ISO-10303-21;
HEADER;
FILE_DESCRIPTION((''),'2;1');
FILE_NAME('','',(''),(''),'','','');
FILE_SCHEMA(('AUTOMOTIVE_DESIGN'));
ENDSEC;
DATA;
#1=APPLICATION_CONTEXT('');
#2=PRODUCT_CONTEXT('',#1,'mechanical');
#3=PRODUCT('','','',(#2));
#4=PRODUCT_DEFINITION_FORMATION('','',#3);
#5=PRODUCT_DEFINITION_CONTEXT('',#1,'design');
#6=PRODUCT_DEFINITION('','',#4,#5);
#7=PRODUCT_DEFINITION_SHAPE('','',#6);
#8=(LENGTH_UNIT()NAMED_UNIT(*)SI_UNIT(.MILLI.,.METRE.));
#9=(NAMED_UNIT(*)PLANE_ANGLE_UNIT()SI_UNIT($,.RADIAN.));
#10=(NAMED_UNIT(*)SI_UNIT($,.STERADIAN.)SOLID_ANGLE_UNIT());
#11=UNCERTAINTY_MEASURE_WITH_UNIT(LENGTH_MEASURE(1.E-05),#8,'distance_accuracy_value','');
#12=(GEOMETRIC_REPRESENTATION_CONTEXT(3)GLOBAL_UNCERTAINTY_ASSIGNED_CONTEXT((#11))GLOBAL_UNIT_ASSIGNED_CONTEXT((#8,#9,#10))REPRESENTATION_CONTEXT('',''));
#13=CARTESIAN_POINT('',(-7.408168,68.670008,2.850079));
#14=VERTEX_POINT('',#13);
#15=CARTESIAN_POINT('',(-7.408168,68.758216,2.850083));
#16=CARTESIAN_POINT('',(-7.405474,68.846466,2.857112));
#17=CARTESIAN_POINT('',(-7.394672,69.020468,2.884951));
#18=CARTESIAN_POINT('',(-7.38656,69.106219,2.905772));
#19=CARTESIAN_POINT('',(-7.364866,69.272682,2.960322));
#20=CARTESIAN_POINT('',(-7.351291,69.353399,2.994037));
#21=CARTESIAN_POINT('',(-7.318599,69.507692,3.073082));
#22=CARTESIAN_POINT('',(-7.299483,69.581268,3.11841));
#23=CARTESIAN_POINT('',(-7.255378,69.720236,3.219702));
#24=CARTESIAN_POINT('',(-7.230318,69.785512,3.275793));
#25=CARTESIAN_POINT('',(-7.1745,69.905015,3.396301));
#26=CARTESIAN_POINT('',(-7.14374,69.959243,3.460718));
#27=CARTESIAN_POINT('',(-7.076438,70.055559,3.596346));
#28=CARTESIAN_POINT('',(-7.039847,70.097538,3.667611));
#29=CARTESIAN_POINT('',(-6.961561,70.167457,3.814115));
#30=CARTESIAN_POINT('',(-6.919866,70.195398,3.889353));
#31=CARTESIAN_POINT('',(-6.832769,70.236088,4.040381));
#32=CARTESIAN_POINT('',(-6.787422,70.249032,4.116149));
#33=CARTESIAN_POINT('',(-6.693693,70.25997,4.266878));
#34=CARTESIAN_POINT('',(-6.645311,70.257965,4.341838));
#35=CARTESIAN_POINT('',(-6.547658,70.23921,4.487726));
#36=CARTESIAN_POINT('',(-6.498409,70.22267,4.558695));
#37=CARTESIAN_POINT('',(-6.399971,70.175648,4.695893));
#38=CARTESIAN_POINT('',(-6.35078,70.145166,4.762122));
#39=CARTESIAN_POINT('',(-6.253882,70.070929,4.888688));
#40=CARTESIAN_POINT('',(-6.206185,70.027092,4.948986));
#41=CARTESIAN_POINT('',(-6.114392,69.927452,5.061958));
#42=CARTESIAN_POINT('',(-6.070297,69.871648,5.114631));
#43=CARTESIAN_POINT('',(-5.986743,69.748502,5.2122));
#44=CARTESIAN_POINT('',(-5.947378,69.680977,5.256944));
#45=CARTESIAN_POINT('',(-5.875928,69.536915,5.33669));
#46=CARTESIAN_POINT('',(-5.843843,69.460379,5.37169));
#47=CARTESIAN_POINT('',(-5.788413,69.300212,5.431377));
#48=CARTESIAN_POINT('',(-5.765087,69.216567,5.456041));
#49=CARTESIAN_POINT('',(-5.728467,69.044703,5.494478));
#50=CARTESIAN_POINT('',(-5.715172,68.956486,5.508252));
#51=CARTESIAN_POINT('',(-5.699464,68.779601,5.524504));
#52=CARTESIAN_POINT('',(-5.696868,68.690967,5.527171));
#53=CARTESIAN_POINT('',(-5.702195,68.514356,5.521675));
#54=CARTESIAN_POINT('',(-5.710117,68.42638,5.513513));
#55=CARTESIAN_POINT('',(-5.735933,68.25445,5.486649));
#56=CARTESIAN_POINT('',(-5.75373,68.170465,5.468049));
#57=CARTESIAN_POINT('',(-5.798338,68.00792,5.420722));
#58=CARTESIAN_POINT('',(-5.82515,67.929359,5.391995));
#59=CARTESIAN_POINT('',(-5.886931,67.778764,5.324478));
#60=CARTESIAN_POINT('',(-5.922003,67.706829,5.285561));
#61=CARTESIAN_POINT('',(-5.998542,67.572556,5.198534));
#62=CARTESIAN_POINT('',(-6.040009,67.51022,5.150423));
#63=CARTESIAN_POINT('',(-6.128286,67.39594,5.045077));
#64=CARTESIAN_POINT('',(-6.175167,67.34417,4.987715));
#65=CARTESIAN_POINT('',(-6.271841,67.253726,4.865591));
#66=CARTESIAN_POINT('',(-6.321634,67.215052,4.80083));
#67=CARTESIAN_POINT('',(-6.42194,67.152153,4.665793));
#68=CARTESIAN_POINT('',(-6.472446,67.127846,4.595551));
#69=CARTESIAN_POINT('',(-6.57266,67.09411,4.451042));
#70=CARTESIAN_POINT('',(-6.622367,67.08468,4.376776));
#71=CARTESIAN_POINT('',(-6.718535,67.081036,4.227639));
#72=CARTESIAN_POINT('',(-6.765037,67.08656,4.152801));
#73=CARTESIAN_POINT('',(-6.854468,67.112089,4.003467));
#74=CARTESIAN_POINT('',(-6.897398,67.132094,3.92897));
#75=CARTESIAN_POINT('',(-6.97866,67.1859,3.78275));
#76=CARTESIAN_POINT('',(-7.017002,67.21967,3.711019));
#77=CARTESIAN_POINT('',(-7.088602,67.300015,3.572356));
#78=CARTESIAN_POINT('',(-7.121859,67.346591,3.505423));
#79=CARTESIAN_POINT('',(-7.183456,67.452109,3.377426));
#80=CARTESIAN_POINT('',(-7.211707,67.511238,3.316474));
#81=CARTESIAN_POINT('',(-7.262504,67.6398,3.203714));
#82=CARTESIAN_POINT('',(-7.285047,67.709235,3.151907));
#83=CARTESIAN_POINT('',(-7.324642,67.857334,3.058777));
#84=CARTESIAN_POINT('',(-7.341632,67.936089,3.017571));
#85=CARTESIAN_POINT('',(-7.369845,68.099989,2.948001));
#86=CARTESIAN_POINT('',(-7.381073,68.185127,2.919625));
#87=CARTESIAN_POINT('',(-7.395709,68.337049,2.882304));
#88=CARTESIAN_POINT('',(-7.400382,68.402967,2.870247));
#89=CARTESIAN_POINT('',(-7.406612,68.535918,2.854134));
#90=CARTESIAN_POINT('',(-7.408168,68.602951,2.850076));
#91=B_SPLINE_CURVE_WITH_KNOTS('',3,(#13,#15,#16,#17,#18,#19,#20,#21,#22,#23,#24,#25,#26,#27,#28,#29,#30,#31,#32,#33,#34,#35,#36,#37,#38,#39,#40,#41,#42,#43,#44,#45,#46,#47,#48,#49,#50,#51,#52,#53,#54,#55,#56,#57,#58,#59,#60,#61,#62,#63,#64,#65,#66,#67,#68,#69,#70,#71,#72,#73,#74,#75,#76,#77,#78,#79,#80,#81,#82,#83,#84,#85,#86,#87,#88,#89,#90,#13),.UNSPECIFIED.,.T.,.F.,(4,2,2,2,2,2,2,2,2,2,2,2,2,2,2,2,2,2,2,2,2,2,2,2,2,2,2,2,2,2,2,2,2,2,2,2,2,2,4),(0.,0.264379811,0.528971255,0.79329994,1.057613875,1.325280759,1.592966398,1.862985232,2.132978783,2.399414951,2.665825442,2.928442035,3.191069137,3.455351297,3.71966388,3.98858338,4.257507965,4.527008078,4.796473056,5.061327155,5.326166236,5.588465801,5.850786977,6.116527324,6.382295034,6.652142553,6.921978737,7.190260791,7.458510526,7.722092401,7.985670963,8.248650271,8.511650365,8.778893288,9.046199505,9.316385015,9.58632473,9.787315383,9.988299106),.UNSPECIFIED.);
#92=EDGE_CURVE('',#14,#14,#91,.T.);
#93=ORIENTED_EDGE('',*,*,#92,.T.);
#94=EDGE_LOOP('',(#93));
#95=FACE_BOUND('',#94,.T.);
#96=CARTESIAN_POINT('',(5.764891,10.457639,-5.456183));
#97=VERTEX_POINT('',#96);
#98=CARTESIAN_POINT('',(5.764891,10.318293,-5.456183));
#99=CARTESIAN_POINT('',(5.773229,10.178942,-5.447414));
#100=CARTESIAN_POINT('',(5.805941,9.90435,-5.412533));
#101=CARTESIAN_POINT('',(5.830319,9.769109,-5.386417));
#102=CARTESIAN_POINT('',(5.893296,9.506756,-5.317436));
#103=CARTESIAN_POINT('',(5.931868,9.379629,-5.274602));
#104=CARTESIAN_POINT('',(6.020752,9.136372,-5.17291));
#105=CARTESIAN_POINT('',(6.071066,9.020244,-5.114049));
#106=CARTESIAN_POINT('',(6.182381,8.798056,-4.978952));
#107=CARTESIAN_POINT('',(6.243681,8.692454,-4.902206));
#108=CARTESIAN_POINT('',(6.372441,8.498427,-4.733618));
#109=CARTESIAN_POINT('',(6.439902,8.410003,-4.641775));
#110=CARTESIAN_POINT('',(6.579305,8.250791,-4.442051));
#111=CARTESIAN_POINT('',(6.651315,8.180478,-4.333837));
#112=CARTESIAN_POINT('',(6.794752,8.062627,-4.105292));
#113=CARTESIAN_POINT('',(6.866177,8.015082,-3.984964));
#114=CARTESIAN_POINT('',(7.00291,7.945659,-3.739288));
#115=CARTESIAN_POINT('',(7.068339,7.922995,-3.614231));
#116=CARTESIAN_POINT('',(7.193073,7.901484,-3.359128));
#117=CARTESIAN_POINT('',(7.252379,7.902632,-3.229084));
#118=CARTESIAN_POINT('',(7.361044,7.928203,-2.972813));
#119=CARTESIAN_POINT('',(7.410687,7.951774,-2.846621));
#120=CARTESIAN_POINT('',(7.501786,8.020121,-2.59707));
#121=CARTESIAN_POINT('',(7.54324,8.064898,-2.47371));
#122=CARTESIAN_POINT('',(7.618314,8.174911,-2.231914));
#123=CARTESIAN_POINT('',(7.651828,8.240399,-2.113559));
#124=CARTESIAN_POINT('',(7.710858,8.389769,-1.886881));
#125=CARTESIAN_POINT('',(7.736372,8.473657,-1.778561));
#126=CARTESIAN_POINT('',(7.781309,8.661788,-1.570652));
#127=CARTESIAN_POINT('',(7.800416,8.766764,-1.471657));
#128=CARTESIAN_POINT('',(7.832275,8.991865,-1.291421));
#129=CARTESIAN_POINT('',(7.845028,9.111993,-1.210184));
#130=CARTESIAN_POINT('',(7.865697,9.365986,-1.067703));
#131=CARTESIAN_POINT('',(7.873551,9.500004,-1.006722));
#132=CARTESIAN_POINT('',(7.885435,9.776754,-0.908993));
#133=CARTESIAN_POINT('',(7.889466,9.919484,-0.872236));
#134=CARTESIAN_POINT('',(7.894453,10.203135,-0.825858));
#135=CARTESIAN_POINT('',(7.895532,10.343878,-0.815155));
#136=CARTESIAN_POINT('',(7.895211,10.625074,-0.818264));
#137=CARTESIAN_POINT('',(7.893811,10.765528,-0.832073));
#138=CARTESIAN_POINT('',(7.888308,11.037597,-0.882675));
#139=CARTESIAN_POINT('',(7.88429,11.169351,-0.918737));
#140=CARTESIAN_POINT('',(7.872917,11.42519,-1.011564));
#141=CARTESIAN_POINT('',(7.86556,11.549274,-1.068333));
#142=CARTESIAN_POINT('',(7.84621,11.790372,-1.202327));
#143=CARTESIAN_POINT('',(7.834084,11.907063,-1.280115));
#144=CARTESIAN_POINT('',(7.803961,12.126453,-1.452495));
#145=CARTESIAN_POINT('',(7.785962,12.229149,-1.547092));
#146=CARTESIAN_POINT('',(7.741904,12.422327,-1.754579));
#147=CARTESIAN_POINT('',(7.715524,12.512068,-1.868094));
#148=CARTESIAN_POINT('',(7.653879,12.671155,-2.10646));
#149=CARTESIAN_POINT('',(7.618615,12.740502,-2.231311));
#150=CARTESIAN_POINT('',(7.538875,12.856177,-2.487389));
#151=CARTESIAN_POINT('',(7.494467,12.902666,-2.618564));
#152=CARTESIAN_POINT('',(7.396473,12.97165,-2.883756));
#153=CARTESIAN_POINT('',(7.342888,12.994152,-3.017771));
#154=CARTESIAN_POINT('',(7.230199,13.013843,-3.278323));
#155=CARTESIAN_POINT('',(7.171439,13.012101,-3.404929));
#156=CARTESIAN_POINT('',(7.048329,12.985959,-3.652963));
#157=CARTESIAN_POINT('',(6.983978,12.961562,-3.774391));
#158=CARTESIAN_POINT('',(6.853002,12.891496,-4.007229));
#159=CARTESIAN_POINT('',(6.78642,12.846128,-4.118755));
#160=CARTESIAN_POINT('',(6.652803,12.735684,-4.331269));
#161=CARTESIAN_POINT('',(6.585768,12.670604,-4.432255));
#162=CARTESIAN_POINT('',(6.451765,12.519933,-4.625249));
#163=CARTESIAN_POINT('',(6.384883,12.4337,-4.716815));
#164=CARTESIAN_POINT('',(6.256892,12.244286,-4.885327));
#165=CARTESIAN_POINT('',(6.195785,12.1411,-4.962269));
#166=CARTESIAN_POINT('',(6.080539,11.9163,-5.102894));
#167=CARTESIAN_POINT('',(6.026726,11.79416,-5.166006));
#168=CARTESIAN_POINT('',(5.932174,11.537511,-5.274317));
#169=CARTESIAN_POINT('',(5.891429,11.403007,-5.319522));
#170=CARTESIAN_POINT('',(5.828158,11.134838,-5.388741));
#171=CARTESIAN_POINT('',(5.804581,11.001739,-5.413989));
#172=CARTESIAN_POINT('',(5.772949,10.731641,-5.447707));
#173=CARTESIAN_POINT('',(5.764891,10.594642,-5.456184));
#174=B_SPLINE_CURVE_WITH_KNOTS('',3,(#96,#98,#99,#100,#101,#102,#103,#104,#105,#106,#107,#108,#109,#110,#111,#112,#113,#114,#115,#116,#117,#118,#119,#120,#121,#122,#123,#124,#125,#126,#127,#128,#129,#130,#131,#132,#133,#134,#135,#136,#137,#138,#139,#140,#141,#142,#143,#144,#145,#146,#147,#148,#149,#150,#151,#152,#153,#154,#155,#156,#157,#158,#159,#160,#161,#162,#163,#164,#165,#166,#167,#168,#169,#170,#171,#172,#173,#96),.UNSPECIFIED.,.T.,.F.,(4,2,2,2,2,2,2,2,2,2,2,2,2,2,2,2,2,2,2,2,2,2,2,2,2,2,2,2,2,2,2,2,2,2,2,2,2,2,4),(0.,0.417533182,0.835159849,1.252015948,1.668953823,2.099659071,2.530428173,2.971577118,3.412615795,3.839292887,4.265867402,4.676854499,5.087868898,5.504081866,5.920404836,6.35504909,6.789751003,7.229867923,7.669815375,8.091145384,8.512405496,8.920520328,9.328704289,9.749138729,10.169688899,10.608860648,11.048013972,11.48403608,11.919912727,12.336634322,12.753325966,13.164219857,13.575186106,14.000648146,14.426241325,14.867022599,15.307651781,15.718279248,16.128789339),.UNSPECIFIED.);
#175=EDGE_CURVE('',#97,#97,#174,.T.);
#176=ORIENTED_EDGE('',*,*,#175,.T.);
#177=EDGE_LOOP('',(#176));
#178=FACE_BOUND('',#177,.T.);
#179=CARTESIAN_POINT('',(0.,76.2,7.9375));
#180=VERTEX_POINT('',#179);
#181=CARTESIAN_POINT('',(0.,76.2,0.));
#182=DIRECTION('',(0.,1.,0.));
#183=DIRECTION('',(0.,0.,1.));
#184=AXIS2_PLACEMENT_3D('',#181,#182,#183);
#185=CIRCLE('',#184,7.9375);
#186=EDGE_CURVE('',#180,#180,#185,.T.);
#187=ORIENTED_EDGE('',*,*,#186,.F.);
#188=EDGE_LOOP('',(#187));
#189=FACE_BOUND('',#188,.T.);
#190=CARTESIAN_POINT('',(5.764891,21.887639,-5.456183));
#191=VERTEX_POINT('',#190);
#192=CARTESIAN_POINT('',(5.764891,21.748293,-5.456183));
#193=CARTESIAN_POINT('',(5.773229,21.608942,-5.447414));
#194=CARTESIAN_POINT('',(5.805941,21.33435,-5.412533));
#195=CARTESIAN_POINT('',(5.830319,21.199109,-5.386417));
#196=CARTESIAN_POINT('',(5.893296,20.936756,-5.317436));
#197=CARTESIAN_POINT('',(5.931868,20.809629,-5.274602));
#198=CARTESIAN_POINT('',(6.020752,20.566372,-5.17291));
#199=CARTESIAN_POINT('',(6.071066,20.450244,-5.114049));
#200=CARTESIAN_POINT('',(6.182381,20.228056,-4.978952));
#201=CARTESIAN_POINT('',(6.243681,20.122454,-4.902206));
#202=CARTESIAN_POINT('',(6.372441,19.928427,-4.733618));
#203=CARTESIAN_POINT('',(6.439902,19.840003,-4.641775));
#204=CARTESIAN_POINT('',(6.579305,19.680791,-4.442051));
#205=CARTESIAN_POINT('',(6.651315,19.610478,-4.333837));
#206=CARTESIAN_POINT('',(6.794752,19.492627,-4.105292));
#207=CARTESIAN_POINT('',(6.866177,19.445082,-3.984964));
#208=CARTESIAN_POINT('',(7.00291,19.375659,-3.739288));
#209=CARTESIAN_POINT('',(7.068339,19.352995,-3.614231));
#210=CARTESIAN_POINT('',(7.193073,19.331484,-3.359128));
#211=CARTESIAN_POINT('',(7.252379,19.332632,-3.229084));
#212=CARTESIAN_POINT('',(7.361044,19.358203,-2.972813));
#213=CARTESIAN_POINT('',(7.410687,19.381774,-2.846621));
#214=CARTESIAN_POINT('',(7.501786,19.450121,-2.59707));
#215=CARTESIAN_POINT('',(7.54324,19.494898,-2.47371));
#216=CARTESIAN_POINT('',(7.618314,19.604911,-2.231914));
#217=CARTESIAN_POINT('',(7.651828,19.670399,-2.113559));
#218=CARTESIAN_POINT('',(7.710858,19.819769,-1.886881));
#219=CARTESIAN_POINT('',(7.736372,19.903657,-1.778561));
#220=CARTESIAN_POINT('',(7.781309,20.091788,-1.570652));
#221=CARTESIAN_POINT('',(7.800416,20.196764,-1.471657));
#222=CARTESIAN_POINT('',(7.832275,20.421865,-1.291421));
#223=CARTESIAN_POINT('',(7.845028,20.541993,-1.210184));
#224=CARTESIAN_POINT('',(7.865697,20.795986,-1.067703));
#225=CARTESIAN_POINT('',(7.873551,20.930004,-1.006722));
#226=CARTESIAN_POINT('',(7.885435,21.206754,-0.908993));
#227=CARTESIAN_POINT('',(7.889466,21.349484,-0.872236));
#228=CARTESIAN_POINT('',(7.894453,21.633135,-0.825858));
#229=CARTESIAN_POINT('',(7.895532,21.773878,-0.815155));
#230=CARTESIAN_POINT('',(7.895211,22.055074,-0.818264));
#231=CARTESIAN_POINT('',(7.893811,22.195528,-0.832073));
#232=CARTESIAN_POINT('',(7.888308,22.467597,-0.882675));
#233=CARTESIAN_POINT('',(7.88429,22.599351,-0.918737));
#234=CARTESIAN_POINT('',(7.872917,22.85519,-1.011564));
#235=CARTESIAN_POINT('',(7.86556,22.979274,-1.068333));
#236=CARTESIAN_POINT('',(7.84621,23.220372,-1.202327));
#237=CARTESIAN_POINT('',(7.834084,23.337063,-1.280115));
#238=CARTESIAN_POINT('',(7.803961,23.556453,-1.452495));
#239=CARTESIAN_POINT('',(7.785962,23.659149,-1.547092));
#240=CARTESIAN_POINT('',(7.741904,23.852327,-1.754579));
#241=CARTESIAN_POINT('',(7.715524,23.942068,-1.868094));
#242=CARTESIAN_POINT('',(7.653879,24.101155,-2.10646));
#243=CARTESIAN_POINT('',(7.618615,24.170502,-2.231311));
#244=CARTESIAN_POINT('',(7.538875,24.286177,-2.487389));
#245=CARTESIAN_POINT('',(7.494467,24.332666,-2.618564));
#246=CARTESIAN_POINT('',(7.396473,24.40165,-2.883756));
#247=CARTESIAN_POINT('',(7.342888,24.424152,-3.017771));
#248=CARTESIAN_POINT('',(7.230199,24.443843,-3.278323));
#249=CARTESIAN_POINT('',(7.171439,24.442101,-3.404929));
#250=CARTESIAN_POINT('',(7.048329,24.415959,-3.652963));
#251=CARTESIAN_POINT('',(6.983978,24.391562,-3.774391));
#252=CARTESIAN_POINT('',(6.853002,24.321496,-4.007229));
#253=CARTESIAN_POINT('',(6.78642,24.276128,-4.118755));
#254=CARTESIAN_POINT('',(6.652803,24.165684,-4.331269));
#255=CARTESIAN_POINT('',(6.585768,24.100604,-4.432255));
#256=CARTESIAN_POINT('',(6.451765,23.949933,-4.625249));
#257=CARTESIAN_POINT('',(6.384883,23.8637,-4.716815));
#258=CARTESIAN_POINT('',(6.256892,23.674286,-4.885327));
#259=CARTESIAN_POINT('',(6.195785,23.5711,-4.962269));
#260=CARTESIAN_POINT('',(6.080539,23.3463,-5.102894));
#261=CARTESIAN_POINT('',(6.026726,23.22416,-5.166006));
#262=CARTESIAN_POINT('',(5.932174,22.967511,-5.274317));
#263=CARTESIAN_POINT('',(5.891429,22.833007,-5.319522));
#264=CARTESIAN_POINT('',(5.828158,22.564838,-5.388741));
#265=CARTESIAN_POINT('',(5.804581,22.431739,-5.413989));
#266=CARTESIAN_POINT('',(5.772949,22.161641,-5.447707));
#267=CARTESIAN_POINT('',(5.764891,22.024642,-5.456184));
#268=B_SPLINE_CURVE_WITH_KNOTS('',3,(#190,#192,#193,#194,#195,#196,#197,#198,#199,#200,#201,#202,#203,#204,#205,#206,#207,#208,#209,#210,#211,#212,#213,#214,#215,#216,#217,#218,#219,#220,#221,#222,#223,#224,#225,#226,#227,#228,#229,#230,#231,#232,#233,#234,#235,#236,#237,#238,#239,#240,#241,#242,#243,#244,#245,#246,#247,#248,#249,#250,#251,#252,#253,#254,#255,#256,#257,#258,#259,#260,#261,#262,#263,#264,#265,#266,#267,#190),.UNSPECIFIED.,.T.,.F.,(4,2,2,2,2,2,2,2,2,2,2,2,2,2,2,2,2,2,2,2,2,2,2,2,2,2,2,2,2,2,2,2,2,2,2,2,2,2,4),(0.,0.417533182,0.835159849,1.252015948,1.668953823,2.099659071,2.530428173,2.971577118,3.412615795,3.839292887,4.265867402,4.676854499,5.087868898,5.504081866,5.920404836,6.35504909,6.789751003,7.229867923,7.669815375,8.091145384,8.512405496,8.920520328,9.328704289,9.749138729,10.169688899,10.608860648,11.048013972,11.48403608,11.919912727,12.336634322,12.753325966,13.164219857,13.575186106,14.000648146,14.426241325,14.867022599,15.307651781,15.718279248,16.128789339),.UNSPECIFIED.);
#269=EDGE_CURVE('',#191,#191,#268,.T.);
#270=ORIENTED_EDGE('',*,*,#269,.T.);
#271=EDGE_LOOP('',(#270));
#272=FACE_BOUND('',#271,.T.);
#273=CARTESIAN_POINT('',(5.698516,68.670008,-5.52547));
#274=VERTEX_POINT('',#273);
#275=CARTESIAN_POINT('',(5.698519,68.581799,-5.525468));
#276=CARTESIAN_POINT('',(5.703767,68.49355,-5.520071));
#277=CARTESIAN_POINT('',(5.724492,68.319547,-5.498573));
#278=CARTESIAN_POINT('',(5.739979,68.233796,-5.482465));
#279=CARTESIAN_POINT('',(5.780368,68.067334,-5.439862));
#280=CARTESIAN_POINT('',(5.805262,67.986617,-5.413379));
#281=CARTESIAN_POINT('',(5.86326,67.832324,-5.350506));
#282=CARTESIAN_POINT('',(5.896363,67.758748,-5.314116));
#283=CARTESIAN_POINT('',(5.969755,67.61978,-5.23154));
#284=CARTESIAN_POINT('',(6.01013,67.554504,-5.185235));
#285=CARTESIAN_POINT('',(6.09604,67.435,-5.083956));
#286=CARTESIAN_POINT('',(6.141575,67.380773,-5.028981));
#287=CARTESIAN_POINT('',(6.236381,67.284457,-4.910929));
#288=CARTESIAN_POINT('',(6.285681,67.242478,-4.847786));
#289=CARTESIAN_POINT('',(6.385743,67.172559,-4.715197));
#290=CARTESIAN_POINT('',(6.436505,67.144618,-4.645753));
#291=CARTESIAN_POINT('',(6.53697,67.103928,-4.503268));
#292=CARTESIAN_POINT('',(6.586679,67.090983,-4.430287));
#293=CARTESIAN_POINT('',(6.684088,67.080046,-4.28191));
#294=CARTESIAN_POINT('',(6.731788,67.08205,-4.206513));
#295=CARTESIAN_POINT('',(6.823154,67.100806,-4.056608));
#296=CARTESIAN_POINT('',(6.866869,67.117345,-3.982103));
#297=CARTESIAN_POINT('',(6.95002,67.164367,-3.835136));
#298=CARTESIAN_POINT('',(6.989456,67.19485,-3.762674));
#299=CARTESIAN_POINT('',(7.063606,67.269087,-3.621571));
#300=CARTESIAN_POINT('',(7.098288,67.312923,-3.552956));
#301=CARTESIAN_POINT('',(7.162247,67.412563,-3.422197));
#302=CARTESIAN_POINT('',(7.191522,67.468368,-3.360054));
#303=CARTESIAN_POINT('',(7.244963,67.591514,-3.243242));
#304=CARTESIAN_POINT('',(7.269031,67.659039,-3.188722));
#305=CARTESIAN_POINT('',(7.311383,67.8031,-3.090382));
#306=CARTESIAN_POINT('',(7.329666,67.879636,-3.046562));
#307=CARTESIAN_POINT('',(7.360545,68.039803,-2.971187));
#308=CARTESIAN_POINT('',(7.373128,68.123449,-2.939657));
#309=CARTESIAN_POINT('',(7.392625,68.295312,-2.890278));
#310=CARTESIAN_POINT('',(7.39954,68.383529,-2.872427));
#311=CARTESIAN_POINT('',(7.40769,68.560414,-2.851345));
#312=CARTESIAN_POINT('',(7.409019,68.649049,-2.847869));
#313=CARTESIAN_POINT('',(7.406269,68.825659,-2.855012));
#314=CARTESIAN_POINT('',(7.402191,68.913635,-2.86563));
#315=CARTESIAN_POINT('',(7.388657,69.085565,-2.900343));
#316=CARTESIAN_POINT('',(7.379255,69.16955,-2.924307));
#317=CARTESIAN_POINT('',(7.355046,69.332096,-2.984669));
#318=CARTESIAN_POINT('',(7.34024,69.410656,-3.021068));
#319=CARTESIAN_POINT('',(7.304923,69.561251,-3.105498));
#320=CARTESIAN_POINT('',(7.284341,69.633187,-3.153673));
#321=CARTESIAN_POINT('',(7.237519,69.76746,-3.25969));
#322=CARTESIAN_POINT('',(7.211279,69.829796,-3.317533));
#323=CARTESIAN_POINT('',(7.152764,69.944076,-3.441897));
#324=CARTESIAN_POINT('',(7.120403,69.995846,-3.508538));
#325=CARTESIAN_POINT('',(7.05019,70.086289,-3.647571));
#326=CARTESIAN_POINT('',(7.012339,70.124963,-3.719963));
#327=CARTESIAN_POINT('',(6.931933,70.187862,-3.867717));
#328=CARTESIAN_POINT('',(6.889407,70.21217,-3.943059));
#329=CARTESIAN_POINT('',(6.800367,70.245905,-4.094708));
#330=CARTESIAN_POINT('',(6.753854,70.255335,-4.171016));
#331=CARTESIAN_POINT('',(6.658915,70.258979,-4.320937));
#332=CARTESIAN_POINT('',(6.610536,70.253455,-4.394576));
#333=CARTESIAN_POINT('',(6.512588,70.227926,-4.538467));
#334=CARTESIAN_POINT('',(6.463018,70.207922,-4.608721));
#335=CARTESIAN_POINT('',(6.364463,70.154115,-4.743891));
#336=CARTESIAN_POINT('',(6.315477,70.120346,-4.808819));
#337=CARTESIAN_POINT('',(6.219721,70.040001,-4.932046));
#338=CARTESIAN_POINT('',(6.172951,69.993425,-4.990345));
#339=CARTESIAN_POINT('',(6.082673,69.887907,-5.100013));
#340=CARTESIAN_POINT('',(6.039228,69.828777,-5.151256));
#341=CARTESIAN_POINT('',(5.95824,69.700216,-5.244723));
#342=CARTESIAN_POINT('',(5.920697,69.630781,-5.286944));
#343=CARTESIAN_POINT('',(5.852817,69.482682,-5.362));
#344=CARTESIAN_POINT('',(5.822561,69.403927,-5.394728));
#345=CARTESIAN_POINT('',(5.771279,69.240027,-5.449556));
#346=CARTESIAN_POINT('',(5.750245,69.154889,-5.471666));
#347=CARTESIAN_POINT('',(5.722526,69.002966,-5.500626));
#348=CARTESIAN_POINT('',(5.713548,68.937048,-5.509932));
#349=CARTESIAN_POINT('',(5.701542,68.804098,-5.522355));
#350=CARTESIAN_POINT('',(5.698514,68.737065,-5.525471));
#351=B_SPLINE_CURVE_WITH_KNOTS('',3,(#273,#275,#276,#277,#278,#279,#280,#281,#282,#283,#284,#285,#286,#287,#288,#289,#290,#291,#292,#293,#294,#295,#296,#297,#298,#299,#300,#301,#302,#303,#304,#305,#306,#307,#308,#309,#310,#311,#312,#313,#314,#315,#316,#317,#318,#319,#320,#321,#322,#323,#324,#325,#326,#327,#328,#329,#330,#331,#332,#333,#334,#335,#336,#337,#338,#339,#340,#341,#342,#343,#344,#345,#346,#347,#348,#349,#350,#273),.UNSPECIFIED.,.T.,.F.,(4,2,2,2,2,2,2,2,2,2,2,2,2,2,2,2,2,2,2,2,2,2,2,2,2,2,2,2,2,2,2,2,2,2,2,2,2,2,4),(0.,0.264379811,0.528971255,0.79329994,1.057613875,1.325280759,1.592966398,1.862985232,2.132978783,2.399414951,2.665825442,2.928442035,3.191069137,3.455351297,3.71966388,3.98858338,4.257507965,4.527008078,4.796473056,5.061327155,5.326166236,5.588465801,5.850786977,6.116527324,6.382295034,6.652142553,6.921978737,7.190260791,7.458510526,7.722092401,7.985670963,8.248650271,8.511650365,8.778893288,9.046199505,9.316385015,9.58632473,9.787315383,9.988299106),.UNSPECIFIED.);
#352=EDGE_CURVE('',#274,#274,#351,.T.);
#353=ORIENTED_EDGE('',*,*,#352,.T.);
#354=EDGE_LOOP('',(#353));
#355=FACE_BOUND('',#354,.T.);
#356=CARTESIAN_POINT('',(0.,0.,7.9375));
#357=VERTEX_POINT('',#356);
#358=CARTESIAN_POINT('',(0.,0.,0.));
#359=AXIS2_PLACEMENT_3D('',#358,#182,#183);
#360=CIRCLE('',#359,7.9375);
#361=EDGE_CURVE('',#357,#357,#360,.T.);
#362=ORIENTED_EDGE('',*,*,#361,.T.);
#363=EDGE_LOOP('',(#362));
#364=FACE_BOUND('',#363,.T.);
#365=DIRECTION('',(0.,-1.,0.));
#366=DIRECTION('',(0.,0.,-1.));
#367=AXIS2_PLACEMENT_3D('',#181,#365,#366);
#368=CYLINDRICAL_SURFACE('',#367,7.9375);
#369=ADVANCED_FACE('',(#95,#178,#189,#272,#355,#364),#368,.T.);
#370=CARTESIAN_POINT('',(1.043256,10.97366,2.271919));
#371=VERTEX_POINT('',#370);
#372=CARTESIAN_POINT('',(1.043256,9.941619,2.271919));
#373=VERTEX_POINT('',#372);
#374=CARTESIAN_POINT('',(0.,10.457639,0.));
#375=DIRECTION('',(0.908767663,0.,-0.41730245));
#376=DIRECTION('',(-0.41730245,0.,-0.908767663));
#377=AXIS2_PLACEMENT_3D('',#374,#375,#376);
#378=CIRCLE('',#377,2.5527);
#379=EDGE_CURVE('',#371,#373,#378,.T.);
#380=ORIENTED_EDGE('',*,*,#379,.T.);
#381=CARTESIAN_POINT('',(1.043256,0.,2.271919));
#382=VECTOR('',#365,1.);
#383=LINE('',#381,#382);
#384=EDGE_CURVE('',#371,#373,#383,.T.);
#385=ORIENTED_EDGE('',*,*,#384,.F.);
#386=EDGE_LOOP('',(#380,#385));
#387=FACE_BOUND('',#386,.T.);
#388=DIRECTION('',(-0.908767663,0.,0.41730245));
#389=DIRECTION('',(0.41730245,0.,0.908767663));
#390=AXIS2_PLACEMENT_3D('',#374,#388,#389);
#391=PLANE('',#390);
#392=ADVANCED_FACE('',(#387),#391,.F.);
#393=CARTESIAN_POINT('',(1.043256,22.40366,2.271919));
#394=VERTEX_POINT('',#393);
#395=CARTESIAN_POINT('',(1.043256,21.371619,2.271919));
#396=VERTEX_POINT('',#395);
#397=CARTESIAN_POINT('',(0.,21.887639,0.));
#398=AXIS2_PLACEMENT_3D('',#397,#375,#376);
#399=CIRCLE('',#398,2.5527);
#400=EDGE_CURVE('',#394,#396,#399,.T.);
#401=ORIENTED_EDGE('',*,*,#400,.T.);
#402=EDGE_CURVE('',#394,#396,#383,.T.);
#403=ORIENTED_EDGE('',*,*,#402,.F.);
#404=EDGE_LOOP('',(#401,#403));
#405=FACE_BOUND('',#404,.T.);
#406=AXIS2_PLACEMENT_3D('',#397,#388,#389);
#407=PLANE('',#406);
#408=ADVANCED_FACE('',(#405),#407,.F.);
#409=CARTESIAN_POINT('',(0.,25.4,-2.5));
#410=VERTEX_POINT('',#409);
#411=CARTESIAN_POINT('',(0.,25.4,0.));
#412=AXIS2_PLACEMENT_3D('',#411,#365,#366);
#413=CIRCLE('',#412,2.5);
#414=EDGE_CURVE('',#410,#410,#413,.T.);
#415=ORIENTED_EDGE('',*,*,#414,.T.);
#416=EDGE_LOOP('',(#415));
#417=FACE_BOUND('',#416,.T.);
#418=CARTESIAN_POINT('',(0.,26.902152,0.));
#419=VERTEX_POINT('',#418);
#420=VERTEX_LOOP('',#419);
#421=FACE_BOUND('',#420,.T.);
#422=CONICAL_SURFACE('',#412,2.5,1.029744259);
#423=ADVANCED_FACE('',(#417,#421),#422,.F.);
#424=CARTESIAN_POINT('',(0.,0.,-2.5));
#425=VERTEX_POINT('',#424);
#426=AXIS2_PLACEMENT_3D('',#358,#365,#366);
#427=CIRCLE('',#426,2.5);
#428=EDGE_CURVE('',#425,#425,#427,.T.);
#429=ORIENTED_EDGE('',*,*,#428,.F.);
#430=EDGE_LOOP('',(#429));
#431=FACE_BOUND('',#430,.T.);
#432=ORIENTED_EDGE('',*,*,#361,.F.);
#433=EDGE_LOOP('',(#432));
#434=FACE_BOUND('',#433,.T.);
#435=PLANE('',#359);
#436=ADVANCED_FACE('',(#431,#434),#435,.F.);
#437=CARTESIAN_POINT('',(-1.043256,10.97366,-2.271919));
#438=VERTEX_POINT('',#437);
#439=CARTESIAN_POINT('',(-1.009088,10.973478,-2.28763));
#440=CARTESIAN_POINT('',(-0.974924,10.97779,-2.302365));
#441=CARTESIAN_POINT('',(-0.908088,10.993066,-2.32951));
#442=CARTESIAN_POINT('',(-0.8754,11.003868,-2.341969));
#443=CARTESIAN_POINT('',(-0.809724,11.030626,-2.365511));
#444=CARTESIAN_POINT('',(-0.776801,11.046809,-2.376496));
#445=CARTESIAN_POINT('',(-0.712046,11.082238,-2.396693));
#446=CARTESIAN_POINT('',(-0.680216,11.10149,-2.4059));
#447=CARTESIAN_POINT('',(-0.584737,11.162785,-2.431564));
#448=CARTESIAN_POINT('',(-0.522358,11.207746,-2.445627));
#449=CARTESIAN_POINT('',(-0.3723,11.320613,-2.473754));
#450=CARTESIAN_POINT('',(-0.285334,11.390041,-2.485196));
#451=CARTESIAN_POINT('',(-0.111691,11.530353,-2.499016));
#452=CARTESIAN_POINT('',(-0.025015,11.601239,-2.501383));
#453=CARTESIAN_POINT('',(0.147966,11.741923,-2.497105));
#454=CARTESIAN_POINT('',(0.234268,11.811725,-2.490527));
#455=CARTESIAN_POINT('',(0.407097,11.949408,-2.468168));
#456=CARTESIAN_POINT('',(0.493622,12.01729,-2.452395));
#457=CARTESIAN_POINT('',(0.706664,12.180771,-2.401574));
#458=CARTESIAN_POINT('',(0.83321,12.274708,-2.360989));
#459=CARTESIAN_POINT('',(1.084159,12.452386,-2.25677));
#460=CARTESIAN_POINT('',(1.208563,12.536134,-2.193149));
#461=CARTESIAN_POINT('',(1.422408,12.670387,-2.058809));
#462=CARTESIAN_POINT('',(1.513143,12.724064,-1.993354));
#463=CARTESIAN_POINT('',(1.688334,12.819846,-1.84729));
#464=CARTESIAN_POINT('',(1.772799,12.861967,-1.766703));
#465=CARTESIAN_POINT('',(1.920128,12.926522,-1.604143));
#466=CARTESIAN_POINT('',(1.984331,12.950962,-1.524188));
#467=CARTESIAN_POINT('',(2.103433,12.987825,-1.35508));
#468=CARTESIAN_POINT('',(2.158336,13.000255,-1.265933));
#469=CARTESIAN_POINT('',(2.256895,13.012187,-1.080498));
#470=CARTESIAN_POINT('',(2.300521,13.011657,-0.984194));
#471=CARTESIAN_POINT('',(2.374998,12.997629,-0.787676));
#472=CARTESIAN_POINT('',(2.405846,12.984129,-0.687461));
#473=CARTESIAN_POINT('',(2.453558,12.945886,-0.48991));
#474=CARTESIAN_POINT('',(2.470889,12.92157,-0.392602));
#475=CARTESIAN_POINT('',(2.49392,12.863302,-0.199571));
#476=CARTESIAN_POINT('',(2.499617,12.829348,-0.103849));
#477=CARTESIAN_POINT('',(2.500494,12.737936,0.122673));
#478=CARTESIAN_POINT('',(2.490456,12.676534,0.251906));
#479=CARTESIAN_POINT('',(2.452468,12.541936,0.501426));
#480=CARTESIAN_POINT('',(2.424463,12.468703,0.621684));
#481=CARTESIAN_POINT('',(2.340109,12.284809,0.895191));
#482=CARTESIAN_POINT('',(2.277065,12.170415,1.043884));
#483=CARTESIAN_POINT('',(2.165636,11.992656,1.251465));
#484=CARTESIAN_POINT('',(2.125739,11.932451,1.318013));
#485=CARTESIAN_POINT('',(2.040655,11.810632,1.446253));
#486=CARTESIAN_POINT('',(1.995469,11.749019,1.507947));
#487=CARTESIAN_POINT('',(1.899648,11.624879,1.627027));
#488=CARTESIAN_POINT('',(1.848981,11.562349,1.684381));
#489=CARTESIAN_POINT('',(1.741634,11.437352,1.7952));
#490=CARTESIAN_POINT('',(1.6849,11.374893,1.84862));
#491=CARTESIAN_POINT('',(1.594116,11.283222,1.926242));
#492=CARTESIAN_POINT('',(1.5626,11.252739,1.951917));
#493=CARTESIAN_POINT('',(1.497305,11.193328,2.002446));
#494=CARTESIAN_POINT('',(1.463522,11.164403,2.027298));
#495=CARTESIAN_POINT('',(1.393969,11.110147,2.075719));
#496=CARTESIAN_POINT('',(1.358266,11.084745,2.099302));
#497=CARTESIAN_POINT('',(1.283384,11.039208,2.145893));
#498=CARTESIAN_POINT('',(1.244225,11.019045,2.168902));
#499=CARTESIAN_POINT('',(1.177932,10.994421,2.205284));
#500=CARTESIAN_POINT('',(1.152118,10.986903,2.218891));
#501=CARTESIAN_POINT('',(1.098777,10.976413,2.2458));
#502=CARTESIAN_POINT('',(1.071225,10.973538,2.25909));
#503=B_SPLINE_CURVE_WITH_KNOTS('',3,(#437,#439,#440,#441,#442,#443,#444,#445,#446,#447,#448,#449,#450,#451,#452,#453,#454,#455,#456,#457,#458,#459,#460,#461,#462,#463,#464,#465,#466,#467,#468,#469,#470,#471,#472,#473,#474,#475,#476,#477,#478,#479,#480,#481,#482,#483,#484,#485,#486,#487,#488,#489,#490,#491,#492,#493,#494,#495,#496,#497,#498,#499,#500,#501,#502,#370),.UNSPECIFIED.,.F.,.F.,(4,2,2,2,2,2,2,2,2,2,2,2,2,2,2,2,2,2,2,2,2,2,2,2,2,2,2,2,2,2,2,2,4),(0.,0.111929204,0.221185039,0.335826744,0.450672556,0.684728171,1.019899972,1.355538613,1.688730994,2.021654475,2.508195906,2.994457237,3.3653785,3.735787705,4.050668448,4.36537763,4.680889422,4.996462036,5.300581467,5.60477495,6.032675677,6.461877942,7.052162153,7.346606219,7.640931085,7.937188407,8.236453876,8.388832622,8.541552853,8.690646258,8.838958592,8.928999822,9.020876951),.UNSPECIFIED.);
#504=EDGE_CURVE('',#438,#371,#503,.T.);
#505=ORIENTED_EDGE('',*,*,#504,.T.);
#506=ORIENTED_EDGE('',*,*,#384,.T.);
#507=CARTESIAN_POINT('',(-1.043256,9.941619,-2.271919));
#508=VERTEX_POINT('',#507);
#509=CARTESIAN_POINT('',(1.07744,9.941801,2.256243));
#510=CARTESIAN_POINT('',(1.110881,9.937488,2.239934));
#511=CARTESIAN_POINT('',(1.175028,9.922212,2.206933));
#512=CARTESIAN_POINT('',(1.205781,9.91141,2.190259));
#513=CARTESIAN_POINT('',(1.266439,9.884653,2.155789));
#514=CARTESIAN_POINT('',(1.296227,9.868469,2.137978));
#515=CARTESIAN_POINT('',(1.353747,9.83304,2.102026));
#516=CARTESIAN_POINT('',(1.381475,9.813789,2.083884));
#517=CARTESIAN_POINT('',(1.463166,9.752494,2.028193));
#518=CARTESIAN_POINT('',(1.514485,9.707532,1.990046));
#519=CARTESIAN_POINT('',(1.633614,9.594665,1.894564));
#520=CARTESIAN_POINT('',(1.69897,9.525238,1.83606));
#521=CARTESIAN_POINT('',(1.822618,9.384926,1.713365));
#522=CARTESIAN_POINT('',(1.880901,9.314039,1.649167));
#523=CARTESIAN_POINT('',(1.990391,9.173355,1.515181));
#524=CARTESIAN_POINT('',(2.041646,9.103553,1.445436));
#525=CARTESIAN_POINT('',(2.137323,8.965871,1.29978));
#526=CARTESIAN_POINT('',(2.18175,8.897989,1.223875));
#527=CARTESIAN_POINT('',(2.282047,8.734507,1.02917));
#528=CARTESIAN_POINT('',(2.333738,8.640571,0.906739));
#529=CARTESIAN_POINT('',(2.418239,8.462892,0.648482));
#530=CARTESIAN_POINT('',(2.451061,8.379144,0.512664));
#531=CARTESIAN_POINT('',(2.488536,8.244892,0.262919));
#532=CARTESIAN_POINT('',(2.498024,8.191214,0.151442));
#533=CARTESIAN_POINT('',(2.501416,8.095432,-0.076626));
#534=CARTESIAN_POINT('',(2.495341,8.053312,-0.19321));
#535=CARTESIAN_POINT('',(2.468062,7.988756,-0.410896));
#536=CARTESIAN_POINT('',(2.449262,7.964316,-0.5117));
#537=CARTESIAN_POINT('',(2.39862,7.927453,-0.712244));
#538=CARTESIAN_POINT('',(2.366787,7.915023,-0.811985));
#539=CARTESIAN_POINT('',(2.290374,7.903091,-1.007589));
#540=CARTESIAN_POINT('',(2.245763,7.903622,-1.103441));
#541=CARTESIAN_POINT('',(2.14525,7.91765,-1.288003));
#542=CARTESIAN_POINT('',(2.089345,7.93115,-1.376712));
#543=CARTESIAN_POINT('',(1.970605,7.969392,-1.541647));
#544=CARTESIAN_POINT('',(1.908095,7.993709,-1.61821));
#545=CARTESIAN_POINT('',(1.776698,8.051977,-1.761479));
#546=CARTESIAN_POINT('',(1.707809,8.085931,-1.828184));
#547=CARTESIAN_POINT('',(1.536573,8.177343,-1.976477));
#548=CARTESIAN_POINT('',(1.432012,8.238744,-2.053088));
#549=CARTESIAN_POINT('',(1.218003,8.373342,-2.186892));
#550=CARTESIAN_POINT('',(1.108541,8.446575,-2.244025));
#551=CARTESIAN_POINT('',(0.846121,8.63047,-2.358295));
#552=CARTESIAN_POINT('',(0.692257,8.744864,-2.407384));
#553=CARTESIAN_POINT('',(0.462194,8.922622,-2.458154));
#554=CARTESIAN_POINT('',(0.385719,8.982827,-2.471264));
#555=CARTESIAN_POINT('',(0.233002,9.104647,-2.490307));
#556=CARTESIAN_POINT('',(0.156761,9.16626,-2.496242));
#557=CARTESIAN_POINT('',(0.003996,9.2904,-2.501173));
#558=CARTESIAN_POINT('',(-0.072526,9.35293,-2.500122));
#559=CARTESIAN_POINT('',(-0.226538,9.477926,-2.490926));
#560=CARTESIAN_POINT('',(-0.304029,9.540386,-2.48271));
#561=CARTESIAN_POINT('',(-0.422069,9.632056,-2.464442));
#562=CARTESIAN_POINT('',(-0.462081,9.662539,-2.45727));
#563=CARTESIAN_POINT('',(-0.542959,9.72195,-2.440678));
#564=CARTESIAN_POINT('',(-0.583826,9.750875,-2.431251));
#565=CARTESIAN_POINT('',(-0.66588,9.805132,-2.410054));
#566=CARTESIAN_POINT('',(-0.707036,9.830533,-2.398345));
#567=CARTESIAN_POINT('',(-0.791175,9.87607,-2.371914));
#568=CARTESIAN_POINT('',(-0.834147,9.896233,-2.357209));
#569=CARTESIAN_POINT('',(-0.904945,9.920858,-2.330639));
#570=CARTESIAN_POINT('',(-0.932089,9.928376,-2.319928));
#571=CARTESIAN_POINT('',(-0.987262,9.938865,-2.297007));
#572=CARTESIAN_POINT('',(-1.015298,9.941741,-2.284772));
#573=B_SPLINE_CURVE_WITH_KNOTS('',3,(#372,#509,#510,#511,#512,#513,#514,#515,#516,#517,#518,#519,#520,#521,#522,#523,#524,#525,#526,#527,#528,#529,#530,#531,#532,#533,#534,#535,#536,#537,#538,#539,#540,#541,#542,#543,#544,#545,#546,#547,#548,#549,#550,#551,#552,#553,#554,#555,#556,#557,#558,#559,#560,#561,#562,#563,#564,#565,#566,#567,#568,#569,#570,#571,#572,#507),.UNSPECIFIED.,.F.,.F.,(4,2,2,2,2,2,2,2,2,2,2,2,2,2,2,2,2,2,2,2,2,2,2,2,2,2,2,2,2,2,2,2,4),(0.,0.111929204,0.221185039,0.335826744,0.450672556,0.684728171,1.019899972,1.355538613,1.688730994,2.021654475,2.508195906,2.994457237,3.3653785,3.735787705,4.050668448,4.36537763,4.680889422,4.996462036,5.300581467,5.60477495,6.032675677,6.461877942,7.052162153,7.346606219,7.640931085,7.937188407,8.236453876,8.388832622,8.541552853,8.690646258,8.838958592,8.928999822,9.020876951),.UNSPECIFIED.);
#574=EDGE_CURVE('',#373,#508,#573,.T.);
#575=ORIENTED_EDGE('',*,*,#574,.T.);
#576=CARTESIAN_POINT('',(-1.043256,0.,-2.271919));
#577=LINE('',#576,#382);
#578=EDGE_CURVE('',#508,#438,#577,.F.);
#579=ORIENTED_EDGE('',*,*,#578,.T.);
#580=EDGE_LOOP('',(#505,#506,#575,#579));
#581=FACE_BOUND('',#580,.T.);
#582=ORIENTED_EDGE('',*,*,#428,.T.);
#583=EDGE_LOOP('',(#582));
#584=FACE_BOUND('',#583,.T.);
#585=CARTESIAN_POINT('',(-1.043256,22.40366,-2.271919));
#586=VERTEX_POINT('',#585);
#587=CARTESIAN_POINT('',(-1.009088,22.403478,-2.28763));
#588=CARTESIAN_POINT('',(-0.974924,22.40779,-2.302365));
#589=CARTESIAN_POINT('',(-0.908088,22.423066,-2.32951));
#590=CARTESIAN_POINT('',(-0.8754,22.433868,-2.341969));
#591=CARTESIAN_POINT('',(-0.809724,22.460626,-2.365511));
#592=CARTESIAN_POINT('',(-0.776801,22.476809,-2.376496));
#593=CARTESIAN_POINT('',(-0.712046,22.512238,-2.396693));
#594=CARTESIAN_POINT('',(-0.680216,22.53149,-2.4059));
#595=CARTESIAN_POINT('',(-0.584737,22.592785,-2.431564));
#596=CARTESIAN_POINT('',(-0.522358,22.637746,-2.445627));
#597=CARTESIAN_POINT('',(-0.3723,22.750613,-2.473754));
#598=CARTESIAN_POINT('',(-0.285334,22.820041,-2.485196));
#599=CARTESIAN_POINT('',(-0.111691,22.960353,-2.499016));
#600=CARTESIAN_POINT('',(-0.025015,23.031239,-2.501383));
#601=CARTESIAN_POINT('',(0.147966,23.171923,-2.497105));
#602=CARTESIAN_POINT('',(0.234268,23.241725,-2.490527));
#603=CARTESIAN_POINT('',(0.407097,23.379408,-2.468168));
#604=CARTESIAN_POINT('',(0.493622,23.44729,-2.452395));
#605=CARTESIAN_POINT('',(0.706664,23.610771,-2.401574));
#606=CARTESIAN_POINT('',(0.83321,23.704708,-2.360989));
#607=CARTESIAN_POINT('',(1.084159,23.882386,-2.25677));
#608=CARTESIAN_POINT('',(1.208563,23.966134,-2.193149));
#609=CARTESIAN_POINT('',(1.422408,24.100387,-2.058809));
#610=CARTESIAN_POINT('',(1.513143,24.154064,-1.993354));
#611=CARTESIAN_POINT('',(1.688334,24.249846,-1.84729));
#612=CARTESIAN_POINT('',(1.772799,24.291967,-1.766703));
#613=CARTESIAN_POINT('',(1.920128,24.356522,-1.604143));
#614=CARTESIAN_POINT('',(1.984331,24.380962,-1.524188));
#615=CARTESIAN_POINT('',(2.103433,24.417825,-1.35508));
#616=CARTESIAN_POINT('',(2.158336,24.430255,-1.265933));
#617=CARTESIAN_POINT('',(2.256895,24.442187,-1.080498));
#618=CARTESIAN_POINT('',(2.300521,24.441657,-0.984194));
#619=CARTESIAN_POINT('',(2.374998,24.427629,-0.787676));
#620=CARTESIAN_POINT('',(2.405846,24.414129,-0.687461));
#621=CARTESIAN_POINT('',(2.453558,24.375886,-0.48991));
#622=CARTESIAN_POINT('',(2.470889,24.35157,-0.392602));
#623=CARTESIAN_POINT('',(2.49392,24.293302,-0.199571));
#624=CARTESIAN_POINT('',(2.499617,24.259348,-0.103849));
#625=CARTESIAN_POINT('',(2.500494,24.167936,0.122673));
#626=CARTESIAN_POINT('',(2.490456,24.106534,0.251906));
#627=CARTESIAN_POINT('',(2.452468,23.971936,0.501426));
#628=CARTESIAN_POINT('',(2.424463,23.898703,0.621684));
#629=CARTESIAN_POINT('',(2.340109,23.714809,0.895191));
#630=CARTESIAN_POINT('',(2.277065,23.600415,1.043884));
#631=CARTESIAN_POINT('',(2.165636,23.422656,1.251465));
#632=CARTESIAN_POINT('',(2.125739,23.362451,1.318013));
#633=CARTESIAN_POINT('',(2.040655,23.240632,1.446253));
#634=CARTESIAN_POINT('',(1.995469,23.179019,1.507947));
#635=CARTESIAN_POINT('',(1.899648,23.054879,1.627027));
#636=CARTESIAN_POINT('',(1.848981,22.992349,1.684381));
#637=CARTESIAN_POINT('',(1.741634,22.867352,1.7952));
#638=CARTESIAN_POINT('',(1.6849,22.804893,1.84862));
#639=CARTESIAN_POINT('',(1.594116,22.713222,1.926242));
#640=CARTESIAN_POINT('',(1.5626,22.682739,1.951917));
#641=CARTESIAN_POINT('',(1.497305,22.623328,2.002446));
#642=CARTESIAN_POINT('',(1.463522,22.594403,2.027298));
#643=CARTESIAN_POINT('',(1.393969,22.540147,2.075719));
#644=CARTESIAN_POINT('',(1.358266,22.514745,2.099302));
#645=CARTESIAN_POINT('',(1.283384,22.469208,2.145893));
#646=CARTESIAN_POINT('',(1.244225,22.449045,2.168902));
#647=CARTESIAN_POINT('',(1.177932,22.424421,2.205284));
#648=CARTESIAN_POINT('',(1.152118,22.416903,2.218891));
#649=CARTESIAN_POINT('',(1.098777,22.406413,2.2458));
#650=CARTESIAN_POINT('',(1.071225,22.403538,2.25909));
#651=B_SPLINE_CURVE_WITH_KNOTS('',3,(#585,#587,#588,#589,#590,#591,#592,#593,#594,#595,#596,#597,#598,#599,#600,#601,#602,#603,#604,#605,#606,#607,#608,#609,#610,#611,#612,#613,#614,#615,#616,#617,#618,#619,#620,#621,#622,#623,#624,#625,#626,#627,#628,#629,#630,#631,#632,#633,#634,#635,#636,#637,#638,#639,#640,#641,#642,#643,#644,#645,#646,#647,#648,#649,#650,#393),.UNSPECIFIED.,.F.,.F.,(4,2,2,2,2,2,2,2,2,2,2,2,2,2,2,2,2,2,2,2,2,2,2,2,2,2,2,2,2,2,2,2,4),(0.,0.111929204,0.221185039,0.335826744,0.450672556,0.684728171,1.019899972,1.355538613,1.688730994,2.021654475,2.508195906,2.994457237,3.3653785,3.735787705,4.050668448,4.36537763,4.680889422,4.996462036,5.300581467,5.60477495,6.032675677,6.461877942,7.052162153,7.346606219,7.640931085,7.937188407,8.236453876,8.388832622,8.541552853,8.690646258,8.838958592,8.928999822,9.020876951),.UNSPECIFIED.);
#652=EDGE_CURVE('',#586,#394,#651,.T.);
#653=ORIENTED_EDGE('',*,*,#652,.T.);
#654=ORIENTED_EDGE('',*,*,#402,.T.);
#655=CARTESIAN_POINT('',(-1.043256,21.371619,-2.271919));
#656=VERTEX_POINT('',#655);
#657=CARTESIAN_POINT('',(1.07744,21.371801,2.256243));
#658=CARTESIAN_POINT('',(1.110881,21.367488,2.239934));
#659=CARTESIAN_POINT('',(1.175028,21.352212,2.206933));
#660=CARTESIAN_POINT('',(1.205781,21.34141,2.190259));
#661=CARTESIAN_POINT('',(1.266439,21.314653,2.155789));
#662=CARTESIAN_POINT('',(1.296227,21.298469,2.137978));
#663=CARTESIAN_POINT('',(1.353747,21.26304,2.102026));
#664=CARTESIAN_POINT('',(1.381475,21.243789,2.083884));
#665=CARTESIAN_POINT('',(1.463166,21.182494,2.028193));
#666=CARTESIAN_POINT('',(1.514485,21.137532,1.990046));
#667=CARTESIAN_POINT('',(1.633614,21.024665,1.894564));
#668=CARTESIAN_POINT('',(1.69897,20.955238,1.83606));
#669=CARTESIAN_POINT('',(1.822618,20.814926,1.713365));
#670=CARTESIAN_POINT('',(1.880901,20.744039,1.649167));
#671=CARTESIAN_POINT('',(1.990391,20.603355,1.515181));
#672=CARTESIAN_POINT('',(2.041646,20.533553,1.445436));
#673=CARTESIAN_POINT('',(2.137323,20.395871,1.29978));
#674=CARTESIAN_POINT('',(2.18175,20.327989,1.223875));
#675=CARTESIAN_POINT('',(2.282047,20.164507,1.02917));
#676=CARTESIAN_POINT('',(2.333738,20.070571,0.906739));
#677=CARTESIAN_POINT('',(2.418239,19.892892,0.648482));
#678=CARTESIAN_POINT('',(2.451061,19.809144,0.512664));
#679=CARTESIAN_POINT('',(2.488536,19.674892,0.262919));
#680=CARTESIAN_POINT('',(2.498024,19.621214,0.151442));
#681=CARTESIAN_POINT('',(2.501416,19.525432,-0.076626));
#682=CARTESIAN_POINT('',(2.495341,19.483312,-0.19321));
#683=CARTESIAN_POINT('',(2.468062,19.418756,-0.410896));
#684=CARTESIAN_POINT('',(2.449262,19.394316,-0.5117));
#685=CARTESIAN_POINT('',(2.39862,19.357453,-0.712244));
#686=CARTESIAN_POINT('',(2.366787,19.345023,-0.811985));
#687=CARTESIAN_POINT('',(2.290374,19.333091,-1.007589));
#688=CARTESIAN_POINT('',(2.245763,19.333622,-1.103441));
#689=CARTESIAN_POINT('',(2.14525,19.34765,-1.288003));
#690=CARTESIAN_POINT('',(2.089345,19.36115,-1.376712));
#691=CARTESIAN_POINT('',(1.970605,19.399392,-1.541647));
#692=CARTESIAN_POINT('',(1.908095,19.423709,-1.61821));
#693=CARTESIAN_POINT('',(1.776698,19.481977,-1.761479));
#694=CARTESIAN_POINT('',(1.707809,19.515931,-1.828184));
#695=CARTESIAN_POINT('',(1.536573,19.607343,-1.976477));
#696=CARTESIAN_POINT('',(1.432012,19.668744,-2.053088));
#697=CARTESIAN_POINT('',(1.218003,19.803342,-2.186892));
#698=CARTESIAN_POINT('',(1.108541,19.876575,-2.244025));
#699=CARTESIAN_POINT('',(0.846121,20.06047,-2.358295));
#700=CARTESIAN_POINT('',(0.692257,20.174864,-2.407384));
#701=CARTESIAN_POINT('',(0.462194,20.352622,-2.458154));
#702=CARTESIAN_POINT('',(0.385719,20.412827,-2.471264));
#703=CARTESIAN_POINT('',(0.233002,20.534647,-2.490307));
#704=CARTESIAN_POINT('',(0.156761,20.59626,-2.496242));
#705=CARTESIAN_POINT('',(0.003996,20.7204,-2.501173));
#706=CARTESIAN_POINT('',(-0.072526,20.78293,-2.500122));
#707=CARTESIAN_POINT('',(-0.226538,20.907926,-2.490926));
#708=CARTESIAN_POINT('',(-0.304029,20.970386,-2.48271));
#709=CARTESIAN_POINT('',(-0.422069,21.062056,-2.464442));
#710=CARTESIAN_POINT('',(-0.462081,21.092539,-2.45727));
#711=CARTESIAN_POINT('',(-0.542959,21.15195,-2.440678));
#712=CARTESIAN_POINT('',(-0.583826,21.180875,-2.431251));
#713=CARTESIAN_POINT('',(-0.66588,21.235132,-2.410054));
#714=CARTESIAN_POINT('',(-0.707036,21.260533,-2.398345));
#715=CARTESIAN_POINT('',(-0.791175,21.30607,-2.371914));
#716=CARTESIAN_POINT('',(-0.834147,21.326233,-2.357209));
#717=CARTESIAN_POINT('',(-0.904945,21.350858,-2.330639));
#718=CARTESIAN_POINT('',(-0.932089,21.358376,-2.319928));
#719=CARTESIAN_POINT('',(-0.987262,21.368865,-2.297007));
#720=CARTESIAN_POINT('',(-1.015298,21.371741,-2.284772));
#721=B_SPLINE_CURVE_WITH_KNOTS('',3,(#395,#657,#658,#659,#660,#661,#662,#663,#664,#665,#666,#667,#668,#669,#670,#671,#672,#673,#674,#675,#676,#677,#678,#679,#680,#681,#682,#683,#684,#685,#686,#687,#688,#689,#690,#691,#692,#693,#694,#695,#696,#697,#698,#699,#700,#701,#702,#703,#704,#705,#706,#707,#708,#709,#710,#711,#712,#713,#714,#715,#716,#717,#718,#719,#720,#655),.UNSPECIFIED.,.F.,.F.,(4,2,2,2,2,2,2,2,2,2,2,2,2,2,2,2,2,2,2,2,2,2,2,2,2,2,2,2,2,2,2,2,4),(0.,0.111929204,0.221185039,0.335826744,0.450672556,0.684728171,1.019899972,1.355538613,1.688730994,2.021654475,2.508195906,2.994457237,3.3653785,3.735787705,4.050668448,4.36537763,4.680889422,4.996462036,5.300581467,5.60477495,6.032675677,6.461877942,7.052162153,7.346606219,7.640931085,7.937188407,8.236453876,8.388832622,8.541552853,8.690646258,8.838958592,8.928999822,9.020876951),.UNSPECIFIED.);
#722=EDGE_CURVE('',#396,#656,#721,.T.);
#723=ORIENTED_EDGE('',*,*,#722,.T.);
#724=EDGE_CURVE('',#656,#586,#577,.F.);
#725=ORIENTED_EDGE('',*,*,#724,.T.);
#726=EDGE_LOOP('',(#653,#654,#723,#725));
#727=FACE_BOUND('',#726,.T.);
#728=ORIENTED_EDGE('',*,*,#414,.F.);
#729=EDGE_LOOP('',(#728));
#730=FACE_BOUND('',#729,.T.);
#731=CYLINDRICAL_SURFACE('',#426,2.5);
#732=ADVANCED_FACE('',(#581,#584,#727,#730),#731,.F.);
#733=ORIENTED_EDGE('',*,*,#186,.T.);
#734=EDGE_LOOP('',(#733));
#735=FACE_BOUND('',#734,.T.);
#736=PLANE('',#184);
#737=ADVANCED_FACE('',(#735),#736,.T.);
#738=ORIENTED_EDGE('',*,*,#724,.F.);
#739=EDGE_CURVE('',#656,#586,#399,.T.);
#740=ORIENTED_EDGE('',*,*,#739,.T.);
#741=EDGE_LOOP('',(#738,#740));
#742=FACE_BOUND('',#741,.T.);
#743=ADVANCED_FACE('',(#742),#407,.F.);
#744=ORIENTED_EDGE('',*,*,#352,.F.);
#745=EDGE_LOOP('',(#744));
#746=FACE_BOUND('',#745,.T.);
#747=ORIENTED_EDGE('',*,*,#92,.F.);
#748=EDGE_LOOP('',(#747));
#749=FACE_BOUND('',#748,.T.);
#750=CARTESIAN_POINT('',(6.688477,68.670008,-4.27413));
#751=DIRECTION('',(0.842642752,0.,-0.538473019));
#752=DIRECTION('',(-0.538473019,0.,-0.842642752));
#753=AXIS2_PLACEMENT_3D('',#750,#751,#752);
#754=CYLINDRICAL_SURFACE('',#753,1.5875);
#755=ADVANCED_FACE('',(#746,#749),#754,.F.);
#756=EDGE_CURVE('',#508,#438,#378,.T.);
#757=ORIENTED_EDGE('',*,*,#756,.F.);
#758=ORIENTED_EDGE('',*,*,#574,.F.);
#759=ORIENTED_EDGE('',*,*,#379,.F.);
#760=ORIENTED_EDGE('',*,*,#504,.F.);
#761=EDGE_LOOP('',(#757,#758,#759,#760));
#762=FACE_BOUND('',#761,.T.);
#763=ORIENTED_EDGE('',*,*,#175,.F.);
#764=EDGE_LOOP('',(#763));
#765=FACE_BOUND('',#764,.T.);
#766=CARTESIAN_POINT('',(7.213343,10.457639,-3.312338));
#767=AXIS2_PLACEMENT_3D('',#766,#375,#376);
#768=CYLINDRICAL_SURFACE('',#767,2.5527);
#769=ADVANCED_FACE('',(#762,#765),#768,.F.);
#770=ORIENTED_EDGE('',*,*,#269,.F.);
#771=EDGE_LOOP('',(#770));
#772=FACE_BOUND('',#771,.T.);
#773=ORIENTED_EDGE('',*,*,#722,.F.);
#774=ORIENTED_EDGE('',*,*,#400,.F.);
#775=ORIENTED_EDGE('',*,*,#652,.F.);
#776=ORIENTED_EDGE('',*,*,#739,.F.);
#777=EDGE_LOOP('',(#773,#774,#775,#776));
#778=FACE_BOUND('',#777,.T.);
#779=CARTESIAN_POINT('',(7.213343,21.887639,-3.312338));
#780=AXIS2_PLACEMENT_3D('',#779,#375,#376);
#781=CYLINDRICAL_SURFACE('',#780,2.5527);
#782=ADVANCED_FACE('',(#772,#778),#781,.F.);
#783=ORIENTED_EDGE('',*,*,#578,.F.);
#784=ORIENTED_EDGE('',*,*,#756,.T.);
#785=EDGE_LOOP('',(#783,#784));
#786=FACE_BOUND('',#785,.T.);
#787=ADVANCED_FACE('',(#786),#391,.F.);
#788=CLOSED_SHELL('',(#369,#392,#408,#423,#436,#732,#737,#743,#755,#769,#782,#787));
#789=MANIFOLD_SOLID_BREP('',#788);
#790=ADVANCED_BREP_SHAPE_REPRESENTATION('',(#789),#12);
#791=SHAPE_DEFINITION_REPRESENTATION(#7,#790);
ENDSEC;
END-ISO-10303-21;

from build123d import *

# Parameters (mm, degrees)
SKETCH1_R                           = 7.9375
BOSS_EXTRUDE1_DEPTH                 = 76.2
F_1_8_0_1250_DOWEL_HOLE1_D          = 3.175
F_1_8_0_1250_DOWEL_HOLE1_DEPTH      = 17.526
F_1_8_0_1250_DOWEL_HOLE1_TIP        = 0.953866233
F_5_0MM_DOWEL_HOLE1_D               = 5
F_5_0MM_DOWEL_HOLE1_DEPTH           = 25.4
F_5_0MM_DOWEL_HOLE1_TIP             = 1.502151548
TAP_DRILL_FOR_1_4_20_TAP1_OUTLINE_R = 2.5527
TAP_DRILL_FOR_1_4_20_TAP1_DEPTH     = 9


with BuildPart() as part:
    # Sketch1 → Boss-Extrude1 (new body)
    with BuildSketch(Plane(origin=(0, 0, 0), x_dir=(1, 0, 0), z_dir=(0, 1, 0))):
        with Locations(Location((0, 0, 0), (0, 0, 90))):
            Circle(SKETCH1_R)
    extrude(amount=BOSS_EXTRUDE1_DEPTH)

    # 1/8 (0.1250) Dowel Hole1
    with Locations(Plane(origin=(6.688476845, 68.670007772, -4.274129589), x_dir=(0.538473019062, 0, 0.842642752145), z_dir=(0.842642752145, 0, -0.538473019062))):
        with Locations((0, 0)):
            Hole(F_1_8_0_1250_DOWEL_HOLE1_D / 2, depth=F_1_8_0_1250_DOWEL_HOLE1_DEPTH)
            with Locations((0, 0, -(F_1_8_0_1250_DOWEL_HOLE1_DEPTH + F_1_8_0_1250_DOWEL_HOLE1_TIP / 2))):  # 118° drill point
                Cone(0, F_1_8_0_1250_DOWEL_HOLE1_D / 2, F_1_8_0_1250_DOWEL_HOLE1_TIP, mode=Mode.SUBTRACT)

    # Ø5.0mm Dowel Hole1
    with Locations(Plane(origin=(0, 0, 0), x_dir=(-1, 0, 0), z_dir=(0, -1, 0))):
        with Locations((0, 0)):
            Hole(F_5_0MM_DOWEL_HOLE1_D / 2, depth=F_5_0MM_DOWEL_HOLE1_DEPTH)
            with Locations((0, 0, -(F_5_0MM_DOWEL_HOLE1_DEPTH + F_5_0MM_DOWEL_HOLE1_TIP / 2))):  # 118° drill point
                Cone(0, F_5_0MM_DOWEL_HOLE1_D / 2, F_5_0MM_DOWEL_HOLE1_TIP, mode=Mode.SUBTRACT)

    # Tap Drill for 1/4-20 Tap1: read off the stored shape, not the designer's step
    # Tap Drill for 1/4-20 Tap1 outline → Tap Drill for 1/4-20 Tap1 (cut)
    with BuildSketch(Plane(origin=(0, 0, 0), x_dir=(0, 1, 0), z_dir=(0.9087676630767977, 0, -0.4173024497243409))):
        with Locations((10.457639215, 0)):
            Circle(TAP_DRILL_FOR_1_4_20_TAP1_OUTLINE_R)
        with Locations((21.887639215, 0)):
            Circle(TAP_DRILL_FOR_1_4_20_TAP1_OUTLINE_R)
    extrude(amount=TAP_DRILL_FOR_1_4_20_TAP1_DEPTH, mode=Mode.SUBTRACT)


solid = part.part
